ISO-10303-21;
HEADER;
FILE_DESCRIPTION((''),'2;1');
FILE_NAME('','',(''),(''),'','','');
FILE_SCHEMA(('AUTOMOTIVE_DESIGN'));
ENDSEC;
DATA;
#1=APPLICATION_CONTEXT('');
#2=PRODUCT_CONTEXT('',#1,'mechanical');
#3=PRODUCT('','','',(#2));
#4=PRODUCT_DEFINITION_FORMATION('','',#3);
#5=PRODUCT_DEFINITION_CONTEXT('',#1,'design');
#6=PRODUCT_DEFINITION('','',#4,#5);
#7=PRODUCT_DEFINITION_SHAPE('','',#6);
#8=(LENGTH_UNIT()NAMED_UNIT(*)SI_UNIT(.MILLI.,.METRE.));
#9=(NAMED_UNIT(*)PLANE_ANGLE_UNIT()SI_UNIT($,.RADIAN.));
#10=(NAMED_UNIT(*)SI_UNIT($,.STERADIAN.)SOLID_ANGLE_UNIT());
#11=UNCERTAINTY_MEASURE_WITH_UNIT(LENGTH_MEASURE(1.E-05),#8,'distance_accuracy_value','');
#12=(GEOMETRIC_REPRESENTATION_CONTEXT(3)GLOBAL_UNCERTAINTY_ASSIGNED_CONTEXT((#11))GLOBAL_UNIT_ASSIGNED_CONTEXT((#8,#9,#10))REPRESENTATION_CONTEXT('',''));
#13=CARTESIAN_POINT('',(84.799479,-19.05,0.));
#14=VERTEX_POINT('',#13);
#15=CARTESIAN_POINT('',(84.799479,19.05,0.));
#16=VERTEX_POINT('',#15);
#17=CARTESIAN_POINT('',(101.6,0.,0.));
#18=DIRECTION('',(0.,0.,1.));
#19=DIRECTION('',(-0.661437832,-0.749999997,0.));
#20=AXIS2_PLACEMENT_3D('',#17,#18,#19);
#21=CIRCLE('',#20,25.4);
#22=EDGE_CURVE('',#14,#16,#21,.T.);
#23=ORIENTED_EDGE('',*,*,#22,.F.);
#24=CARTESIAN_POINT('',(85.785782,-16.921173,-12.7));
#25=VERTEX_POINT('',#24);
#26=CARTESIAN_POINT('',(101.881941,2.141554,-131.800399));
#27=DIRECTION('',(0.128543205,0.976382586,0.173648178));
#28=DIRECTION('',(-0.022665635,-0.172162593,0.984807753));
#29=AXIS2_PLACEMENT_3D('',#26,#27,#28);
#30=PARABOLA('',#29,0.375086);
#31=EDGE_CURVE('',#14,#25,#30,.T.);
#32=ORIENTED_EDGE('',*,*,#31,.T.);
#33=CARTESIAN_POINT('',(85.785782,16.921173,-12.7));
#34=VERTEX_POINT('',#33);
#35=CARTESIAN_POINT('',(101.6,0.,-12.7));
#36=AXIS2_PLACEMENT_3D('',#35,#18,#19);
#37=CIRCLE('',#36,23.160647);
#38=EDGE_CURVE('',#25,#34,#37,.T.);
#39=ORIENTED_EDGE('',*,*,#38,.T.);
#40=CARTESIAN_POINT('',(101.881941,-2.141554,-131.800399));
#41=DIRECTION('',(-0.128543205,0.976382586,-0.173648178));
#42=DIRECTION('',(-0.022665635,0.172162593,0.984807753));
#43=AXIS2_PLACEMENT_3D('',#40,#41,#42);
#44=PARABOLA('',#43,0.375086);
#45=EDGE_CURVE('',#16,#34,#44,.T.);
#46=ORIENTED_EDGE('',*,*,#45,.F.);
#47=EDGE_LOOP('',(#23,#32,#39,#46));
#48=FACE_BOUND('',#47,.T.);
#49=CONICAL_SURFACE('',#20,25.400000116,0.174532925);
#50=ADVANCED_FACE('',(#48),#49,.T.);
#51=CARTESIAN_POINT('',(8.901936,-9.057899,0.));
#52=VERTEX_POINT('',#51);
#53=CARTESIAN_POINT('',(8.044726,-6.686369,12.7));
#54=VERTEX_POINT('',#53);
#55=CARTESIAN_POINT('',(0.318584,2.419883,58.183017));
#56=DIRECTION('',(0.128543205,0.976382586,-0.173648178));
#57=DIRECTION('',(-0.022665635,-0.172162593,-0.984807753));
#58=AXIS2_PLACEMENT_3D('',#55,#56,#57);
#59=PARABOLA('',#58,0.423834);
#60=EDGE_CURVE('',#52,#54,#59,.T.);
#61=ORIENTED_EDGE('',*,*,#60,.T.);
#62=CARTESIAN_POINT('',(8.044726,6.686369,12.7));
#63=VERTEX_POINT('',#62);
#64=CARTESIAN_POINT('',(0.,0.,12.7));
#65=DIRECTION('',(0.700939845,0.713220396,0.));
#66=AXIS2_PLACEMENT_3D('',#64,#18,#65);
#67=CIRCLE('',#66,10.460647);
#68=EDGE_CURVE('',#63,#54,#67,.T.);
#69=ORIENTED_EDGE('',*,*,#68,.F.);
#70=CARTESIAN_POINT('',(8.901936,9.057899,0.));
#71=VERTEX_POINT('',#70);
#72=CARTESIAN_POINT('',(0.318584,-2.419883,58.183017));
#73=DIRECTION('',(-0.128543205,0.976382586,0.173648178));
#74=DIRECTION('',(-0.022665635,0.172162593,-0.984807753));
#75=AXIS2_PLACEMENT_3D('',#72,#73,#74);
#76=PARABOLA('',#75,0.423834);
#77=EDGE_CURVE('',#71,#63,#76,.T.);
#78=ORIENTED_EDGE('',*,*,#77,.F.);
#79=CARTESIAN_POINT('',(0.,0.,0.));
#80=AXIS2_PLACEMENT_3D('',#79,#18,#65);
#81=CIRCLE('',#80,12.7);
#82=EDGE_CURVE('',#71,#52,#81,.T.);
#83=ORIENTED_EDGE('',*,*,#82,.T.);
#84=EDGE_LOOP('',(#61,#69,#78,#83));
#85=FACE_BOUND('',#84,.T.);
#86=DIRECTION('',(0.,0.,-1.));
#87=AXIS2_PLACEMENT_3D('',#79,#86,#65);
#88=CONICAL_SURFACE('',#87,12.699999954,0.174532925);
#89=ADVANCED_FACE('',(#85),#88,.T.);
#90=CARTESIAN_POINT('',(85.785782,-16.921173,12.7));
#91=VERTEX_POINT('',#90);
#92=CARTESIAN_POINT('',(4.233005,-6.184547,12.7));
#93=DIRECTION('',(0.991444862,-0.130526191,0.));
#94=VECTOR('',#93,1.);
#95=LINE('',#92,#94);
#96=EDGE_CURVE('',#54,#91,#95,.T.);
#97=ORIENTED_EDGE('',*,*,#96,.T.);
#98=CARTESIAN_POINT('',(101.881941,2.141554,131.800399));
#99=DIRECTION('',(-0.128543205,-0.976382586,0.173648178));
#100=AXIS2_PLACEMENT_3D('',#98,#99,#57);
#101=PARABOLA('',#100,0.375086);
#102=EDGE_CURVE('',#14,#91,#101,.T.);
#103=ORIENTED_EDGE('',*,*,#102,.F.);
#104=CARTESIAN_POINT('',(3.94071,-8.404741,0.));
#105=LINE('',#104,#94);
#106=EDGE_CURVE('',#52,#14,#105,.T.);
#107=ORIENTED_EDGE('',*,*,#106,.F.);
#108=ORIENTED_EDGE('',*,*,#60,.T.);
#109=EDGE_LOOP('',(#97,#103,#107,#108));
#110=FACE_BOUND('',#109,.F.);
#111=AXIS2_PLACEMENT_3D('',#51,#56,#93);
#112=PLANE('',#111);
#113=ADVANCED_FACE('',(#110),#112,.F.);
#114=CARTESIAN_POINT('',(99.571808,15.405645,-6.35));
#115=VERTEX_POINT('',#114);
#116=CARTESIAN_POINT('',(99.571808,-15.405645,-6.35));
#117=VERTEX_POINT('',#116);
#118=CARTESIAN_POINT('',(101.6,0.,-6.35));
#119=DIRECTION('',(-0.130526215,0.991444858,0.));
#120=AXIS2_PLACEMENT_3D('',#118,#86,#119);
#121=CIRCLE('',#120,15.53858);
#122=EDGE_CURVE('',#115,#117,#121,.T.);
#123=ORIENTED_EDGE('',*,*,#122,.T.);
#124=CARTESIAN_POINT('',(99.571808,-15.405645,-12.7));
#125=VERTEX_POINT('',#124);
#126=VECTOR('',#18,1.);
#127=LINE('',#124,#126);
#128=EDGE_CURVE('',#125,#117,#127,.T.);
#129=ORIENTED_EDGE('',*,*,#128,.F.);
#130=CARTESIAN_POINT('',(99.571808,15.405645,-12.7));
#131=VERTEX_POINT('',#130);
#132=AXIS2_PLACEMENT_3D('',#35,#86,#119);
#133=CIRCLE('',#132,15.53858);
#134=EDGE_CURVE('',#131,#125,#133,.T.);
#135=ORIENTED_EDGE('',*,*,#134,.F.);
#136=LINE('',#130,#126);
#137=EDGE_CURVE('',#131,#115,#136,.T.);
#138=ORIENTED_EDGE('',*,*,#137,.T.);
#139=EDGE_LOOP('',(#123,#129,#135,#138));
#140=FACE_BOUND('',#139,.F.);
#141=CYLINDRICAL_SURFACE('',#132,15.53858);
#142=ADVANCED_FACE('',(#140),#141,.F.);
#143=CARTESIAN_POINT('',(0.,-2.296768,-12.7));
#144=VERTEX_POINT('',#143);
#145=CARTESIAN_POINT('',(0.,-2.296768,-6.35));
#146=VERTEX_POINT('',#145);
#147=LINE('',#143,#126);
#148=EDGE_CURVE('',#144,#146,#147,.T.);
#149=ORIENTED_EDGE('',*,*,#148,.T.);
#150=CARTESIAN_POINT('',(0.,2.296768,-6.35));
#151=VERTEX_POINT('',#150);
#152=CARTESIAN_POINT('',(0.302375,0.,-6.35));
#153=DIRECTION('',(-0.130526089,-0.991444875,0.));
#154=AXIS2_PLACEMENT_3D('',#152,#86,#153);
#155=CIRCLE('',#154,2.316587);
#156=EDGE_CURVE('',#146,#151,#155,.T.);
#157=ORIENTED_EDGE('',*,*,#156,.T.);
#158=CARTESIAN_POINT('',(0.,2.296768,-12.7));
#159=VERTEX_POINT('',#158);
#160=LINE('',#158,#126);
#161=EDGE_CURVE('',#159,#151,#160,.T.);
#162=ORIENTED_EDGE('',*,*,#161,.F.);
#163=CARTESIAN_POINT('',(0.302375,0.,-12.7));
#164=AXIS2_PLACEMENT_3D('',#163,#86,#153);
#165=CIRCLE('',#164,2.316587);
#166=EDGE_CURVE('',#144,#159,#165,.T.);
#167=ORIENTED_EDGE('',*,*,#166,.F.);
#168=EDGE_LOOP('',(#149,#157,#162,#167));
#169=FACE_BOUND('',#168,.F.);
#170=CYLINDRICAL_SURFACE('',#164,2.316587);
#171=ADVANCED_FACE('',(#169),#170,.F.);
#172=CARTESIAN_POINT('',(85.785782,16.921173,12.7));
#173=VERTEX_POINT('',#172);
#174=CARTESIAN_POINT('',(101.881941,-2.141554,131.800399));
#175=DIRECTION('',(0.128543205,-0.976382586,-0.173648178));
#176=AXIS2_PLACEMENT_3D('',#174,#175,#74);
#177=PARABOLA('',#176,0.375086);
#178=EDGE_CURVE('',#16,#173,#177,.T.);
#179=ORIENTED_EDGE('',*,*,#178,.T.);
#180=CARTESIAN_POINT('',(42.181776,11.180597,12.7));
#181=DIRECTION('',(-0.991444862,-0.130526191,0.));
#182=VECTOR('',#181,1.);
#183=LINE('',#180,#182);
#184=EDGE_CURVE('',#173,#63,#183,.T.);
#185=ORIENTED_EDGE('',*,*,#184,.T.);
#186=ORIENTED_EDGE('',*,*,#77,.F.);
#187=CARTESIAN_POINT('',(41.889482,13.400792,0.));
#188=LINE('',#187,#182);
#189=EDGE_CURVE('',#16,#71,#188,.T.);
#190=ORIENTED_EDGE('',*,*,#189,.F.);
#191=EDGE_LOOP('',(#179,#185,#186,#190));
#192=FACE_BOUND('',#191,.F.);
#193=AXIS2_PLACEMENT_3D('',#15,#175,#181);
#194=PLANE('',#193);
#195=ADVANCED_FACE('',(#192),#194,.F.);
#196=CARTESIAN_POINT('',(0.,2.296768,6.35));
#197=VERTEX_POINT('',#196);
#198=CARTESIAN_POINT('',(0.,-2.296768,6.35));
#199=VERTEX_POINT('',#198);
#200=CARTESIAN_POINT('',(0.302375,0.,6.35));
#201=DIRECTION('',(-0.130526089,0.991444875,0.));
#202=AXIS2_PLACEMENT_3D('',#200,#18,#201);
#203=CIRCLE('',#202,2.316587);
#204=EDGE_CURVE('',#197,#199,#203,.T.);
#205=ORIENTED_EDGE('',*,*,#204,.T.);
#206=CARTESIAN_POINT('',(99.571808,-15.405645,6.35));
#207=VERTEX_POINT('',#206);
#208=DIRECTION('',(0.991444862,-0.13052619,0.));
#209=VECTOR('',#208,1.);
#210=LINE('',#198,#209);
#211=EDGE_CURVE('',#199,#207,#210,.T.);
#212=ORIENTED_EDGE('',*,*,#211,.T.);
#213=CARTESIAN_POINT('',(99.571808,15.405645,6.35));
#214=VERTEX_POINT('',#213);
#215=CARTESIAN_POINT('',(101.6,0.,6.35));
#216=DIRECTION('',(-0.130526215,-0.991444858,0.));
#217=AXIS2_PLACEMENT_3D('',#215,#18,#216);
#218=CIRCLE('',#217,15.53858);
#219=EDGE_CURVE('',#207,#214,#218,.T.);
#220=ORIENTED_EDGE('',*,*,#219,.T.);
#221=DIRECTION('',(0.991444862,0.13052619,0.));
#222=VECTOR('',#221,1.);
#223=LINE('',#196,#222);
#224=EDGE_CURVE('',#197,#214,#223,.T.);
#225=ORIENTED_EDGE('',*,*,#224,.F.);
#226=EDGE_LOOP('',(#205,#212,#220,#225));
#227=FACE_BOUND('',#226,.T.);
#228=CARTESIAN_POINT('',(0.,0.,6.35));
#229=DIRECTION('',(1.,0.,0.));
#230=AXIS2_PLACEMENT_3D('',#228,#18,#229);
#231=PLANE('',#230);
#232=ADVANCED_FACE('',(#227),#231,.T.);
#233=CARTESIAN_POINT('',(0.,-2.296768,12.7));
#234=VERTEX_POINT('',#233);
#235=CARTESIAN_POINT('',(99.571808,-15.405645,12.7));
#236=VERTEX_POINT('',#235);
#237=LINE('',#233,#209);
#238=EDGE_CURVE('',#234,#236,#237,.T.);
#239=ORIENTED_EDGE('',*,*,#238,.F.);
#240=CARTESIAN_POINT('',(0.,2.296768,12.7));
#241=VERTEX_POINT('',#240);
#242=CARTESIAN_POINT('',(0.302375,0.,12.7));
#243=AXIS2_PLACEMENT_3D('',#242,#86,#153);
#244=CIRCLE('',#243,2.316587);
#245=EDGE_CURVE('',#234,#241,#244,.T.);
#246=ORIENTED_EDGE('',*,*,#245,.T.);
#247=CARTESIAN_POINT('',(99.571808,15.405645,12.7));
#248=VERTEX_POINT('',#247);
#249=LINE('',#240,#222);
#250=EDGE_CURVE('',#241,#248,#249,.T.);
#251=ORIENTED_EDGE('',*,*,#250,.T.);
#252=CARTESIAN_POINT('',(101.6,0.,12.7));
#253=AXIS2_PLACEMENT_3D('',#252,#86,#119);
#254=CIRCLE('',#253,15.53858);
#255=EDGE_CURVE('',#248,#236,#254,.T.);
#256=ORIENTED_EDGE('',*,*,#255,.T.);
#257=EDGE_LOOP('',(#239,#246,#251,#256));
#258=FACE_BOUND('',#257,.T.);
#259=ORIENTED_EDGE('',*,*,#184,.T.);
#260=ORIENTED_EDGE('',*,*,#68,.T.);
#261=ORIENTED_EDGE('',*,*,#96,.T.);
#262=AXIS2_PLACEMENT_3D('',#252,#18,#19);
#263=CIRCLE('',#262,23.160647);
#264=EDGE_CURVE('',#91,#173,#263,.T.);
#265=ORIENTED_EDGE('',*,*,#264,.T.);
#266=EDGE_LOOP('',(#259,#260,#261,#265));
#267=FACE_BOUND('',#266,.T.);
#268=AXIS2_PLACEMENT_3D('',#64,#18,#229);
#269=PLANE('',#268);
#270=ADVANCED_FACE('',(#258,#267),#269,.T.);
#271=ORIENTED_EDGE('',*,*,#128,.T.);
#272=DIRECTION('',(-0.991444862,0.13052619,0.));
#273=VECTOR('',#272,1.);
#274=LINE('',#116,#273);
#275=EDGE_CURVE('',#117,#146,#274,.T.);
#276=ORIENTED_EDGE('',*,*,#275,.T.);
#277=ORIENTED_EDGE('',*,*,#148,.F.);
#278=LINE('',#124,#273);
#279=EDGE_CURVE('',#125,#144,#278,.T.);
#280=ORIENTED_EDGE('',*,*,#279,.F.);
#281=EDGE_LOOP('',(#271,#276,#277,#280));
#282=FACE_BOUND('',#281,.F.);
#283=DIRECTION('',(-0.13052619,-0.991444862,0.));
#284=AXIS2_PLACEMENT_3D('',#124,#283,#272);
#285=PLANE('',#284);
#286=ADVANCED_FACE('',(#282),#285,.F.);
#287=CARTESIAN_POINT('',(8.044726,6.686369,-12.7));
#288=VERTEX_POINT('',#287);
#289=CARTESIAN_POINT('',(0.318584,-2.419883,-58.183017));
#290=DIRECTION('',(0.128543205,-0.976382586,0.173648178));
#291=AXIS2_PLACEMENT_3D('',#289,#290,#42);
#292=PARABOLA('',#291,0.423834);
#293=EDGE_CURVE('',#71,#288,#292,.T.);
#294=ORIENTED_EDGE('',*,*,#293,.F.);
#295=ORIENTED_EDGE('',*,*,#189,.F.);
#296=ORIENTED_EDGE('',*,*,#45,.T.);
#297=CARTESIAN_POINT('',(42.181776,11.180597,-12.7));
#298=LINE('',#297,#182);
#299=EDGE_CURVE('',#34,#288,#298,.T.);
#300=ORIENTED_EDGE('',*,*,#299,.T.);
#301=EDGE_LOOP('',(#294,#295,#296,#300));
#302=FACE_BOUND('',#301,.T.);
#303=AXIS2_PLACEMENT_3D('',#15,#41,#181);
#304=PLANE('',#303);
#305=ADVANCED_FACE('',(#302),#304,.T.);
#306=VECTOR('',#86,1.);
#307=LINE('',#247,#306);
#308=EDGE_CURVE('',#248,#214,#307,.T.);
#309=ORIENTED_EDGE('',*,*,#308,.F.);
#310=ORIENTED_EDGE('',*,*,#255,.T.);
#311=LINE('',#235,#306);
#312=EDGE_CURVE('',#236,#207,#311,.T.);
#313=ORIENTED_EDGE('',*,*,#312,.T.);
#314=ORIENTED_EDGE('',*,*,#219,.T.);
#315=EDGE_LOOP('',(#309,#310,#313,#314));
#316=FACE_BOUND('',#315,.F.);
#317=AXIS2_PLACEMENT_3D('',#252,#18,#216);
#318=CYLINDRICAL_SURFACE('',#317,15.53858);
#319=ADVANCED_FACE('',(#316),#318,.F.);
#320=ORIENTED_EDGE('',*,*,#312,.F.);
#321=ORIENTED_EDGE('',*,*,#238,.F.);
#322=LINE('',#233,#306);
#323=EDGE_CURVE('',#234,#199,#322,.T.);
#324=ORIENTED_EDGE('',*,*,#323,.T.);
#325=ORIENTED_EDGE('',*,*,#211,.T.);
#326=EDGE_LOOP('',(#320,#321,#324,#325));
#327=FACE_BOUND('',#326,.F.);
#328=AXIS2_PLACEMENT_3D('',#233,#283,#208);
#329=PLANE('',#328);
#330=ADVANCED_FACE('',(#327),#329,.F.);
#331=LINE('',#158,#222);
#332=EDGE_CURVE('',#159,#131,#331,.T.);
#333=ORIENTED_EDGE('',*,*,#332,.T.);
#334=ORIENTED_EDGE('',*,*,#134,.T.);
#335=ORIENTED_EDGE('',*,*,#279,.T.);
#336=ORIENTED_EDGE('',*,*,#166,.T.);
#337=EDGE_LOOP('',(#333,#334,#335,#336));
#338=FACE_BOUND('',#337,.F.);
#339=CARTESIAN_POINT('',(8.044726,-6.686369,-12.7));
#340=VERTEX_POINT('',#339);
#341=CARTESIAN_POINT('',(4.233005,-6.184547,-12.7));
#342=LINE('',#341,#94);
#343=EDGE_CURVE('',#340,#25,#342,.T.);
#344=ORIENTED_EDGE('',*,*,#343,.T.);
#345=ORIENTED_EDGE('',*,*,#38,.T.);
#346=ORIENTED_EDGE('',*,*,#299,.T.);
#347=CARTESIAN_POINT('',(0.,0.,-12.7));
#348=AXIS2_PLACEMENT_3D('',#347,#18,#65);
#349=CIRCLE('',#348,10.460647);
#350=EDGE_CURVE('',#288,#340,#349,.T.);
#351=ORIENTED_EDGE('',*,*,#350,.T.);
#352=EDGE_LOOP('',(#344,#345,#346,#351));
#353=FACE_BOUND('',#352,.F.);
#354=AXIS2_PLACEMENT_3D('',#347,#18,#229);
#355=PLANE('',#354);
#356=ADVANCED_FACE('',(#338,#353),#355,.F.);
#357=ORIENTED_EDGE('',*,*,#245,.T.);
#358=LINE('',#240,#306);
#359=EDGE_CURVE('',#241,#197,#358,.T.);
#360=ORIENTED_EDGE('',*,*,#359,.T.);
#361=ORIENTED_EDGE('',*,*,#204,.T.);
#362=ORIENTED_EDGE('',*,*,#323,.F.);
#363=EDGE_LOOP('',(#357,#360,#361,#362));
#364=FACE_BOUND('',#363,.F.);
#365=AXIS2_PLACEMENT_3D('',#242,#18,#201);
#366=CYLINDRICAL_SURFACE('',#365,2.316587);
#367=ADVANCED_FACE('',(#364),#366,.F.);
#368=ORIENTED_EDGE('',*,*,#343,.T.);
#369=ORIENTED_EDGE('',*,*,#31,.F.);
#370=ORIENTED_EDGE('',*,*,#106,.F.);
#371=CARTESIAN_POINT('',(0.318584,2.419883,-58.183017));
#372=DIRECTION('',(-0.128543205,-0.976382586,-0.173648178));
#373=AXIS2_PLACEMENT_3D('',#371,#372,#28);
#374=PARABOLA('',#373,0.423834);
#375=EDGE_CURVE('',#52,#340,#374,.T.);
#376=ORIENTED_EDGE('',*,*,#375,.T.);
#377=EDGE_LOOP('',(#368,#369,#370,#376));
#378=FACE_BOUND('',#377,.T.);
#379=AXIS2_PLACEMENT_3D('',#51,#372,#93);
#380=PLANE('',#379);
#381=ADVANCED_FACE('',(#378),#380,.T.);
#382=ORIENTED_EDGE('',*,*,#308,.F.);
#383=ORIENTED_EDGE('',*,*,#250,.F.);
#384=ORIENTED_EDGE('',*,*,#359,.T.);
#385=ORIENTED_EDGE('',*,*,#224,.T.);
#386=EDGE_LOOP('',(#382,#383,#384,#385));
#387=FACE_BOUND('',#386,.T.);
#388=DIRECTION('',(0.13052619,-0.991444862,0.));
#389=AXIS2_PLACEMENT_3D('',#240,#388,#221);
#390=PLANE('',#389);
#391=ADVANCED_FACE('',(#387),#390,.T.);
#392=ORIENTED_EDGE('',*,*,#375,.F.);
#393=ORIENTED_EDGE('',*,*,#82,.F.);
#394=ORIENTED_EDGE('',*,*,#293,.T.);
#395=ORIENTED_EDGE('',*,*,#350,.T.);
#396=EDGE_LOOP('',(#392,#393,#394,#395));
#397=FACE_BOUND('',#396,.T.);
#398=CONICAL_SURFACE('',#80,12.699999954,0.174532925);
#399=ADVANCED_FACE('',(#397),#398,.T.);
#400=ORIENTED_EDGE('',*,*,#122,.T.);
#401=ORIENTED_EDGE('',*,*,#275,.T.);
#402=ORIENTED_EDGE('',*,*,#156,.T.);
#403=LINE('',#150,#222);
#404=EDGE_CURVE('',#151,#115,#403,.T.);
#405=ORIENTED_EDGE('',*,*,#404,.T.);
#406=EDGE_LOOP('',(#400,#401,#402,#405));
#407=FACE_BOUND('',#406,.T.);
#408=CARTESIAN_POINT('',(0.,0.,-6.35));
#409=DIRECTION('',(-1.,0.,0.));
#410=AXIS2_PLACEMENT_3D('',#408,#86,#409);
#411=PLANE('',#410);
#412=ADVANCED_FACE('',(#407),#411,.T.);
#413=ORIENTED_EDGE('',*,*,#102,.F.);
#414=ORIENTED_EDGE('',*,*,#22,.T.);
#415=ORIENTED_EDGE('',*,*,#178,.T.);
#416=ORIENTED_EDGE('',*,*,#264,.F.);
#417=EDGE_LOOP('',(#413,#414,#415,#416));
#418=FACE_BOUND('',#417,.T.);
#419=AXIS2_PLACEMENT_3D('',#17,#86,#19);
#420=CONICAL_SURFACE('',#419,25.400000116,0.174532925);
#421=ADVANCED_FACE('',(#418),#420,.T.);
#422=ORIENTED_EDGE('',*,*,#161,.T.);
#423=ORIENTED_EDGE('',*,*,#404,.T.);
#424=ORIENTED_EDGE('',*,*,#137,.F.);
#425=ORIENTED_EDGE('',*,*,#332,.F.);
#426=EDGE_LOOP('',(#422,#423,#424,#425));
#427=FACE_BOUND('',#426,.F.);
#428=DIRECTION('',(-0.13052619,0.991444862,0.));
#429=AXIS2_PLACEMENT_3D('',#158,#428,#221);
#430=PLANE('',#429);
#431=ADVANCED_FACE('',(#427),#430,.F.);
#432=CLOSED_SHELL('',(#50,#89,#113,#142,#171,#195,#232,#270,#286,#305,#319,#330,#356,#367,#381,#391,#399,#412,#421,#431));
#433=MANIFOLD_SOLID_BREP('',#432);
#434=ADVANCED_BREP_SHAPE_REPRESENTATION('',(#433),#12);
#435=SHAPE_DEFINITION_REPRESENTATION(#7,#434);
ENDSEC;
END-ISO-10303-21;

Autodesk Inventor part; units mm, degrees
ref_plane "YZ Plane" through (0, 0, 0) normal (1, 0, 0) x (0, 1, 0)
ref_plane "XZ Plane" through (0, 0, 0) normal (0, 1, 0) x (-1, 0, 0)
ref_plane "XY Plane" through (0, 0, 0) normal (0, 0, 1) x (1, 0, 0)
sketch "Sketch1" plane through (0, 0, 0) normal (0, 0, 1) x (1, 0, 0)
  line L0 (-40.64, 0) -> (154.94, 0)
  line L1 (0, -35.56) -> (0, 35.56)
  arc A0 (8.901936, 9.057899) -> (8.901936, -9.057899) centre (0, 0) ccw
  arc A1 (84.799479, -19.05) -> (84.799479, 19.05) centre (101.6, 0) ccw
  line L2 (8.901936, 9.057899) -> (84.799479, 19.05)
  line L3 (8.901936, -9.057899) -> (84.799479, -19.05)
  dimension "d1" = 25.4
  dimension "d3" = 50.8
  dimension "d4" = 15
  dimension "d5" = 38.1
  dimension "d6" = 101.6
sketch "Sketch1 outline for Extrusion1" plane through (0, 0, 0) normal (0, 0, 1) x (1, 0, 0)
  arc A0 (8.901936, 9.057899) -> (8.901936, -9.057899) centre (0, 0) ccw
  line L0 (84.799479, 19.05) -> (8.901936, 9.057899)
  arc A1 (84.799479, -19.05) -> (84.799479, 19.05) centre (101.6, 0) ccw
  line L1 (8.901936, -9.057899) -> (84.799479, -19.05)
extrude "Extrusion1" add sketch "Sketch1 outline for Extrusion1" along normal mid plane 25.4 draft -10
sketch "Sketch2" plane through (0, 0, 12.7) normal (0, 0, 1) x (1, 0, 0)
  line L0 (0, 2.296768) -> (99.571808, 15.405645)
  line L1 (8.044726, 6.686369) -> (85.785782, 16.921173)
  line L2 (0, -35.56) -> (0, 35.56)
  line L3 (-40.64, 0) -> (154.94, 0)
  line L4 (0, -2.296768) -> (99.571808, -15.405645)
  arc A0 (0, 2.296768) -> (0, -2.296768) centre (0.302375, 0) ccw
  arc A1 (99.571808, -15.405645) -> (99.571808, 15.405645) centre (101.6, 0) ccw
  arc A2 (85.785782, -16.921173) -> (85.785782, 16.921173) centre (101.6, 0) ccw
  point P0 (0, 0)
  point P1 (8.355059, 3.396732)
  point P2 (8.355059, -3.396732)
  dimension "d10" = 3.302
extrude "Extrusion2" cut sketch "Sketch2" against normal blind 6.35
sketch "Sketch3" plane through (0, 0, -12.7) normal (0, 0, -1) x (-1, 0, 0)
  arc A0 (0, -2.296768) -> (0, 2.296768) centre (-0.302375, 0) ccw
  arc A1 (0, -2.296768) -> (0, 2.296768) centre (-0.302375, 0) ccw
  line L0 (-99.571808, -15.405645) -> (0, -2.296768)
  line L1 (0, 2.296768) -> (-99.571808, 15.405645)
  arc A2 (-99.571808, 15.405645) -> (-99.571808, -15.405645) centre (-101.6, 0) ccw
  arc A3 (-99.571808, 15.405645) -> (-99.571808, -15.405645) centre (-101.6, 0) ccw
  line L2 (0, -2.296768) -> (-99.571808, -15.405645)
  line L3 (-85.785782, 16.921173) -> (-8.044726, 6.686369)
  point P0 (0, 0)
  point P1 (0, 2.296768)
extrude "Extrusion3" cut sketch "Sketch3" against normal blind 6.35
properties part number "Ch3 Part 2"
